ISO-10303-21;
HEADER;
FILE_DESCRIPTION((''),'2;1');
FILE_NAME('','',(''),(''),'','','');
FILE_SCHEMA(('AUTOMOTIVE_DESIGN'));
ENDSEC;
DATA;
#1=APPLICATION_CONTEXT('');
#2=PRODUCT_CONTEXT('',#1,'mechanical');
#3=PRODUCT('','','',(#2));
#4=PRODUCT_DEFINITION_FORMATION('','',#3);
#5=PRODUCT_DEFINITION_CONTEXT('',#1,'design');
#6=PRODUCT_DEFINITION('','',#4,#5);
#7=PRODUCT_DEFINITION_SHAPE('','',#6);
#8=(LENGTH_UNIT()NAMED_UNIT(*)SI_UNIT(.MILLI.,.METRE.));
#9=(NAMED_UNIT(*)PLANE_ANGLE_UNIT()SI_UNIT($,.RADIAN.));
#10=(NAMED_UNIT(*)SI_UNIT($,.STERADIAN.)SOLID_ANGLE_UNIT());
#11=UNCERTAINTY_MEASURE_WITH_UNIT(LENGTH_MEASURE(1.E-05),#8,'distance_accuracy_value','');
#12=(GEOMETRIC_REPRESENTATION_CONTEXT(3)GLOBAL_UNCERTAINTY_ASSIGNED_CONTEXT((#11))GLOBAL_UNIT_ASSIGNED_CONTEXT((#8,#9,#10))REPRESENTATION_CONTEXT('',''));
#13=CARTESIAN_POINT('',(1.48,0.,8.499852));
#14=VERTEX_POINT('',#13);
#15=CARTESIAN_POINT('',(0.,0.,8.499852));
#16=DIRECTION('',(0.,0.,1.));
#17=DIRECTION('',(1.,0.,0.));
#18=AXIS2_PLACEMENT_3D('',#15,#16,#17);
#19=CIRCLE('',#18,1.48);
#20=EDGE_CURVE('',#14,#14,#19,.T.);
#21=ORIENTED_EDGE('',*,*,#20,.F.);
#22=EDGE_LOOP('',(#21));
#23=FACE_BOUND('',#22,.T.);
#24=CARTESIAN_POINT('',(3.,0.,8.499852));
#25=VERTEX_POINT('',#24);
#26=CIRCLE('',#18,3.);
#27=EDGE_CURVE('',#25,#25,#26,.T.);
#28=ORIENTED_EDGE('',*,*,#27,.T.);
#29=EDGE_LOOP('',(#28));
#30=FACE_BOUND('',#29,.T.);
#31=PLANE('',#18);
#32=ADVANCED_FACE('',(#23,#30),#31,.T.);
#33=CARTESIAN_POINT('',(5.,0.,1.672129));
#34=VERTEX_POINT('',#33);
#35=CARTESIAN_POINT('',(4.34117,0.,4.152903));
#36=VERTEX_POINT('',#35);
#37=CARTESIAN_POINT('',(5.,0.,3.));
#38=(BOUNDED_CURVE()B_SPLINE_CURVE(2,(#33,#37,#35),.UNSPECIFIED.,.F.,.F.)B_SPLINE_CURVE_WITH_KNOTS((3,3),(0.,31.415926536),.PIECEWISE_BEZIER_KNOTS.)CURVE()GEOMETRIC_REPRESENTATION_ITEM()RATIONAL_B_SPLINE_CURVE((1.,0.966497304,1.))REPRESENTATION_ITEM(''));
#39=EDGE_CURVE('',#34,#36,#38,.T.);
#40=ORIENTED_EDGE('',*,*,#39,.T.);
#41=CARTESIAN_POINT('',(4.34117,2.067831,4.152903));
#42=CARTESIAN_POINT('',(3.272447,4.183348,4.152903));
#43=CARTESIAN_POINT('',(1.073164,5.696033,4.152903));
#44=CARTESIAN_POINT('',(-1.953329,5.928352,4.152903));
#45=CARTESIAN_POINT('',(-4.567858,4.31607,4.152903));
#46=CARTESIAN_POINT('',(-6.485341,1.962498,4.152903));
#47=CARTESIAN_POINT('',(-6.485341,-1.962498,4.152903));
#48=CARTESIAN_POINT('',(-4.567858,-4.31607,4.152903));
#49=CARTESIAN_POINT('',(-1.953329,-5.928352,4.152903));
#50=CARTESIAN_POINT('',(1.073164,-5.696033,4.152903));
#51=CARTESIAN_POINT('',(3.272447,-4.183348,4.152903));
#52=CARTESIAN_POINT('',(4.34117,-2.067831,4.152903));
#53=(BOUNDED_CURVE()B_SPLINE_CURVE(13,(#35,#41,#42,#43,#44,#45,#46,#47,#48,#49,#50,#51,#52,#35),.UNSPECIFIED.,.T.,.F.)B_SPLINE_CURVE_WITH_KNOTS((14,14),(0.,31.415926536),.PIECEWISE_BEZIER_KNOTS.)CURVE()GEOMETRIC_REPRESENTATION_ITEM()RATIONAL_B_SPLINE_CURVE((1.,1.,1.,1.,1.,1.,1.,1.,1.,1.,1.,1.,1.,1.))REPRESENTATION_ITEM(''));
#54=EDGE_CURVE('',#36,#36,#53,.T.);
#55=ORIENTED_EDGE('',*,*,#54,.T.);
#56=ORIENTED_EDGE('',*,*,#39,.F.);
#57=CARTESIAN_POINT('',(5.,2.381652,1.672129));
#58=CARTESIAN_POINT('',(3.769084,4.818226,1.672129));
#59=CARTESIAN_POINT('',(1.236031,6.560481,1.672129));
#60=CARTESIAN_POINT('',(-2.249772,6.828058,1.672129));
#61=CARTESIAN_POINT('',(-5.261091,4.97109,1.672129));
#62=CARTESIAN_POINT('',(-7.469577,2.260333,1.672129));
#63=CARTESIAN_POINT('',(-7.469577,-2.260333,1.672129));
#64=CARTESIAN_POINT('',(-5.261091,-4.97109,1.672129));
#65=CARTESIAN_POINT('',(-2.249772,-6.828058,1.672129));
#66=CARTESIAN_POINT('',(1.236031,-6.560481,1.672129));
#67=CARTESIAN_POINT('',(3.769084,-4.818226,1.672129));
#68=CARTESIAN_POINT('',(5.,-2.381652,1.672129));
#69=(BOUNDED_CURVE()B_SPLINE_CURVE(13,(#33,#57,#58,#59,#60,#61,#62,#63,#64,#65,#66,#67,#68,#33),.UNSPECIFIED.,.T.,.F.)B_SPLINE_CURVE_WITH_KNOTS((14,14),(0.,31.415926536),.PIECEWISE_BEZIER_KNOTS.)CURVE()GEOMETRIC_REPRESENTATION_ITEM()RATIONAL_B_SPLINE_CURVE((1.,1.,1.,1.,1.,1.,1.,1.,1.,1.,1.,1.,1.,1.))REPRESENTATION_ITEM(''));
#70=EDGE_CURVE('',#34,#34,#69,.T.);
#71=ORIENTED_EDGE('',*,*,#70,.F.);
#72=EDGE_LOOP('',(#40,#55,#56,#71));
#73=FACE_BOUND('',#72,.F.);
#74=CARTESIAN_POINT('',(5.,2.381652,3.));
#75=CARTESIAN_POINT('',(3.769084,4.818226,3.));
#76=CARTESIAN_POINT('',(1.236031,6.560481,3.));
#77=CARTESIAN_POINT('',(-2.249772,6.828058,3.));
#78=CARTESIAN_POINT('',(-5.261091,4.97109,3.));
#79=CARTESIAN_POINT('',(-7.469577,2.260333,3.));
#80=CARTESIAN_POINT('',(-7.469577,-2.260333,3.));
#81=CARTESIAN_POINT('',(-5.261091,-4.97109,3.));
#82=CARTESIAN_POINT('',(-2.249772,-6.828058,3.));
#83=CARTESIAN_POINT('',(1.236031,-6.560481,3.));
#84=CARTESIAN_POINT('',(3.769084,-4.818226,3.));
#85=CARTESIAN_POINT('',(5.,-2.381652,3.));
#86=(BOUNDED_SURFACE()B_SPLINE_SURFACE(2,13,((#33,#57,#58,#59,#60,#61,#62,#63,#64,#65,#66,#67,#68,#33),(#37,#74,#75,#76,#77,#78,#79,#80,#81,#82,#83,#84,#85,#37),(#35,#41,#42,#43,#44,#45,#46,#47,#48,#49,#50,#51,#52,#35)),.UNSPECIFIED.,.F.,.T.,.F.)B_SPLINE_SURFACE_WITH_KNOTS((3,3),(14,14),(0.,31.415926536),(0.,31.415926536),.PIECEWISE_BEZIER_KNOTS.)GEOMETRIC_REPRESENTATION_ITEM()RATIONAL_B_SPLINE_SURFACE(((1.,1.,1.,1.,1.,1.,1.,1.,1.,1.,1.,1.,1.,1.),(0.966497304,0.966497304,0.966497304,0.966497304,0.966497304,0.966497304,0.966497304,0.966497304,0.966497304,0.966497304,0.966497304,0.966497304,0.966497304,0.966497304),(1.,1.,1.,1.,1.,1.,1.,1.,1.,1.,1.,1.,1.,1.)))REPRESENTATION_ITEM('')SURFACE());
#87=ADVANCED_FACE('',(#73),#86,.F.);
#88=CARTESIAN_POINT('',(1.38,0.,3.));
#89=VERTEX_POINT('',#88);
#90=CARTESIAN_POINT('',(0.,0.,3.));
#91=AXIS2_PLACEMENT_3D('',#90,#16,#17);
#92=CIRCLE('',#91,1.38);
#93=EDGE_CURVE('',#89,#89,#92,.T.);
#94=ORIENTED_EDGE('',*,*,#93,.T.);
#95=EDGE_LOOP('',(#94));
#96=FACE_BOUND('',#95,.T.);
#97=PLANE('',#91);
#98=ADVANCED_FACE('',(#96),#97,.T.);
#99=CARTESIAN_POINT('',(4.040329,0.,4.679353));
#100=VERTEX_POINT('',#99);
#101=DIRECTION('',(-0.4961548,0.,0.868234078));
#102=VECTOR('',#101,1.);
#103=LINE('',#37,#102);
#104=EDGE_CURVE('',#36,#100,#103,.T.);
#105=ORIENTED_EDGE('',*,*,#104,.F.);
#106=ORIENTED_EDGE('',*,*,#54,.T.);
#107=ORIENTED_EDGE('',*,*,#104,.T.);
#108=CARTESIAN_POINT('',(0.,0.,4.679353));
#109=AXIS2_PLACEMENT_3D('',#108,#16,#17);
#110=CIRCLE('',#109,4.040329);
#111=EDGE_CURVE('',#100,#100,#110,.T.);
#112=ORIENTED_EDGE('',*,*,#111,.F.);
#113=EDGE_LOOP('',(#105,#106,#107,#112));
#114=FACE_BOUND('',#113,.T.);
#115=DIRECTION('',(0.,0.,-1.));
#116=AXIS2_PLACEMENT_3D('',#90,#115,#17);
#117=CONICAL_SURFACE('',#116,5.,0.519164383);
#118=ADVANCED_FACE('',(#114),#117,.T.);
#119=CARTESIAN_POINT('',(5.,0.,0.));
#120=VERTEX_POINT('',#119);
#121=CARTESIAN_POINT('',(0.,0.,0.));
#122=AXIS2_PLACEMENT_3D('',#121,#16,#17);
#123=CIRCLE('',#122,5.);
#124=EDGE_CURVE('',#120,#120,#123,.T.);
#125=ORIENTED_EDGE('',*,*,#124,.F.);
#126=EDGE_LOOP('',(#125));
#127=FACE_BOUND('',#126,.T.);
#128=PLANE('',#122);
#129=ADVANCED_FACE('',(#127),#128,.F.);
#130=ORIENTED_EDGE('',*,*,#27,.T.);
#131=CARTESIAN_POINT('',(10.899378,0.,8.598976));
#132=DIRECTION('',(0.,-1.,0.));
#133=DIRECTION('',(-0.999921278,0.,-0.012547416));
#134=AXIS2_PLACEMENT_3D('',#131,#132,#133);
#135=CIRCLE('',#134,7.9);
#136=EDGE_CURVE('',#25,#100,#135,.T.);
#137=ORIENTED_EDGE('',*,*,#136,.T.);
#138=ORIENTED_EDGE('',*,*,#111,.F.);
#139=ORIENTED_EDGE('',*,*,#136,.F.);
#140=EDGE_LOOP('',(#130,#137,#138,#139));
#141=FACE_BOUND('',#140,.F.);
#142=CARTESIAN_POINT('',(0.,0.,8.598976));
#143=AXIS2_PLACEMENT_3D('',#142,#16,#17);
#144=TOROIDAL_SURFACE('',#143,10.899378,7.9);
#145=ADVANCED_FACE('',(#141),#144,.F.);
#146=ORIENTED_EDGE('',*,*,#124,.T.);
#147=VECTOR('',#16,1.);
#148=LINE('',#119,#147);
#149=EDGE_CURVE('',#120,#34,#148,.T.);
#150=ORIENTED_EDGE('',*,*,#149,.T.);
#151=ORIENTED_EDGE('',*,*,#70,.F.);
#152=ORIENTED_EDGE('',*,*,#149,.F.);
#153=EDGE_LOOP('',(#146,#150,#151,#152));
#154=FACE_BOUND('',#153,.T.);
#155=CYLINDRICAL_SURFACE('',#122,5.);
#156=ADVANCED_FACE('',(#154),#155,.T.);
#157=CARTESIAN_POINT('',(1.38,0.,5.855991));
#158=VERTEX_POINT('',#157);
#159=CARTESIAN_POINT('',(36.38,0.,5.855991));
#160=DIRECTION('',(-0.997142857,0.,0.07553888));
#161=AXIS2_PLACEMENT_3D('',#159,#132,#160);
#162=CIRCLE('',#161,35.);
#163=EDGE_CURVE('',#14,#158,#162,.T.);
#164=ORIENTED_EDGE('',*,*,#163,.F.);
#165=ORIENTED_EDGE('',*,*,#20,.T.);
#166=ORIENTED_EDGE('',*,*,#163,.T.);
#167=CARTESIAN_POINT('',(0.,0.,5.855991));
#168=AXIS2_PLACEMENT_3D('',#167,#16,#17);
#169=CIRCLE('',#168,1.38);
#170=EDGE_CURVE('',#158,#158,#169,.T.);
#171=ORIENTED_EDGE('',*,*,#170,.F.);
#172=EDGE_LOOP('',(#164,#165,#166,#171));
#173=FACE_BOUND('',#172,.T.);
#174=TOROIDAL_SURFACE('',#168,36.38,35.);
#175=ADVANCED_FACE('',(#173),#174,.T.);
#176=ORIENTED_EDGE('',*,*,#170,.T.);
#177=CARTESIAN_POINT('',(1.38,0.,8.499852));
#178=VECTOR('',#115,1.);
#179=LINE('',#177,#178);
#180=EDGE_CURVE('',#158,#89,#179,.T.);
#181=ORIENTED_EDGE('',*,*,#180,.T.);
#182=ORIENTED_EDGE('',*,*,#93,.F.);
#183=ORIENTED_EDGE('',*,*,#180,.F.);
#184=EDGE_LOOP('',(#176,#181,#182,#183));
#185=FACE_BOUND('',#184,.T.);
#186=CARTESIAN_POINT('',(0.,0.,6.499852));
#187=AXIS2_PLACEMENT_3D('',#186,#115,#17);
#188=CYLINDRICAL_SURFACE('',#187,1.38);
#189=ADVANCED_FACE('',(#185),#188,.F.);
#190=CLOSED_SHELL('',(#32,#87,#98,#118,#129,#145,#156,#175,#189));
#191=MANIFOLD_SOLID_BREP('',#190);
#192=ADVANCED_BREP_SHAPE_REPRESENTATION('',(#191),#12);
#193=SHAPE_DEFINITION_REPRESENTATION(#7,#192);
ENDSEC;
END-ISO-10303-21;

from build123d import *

# Parameters (mm, degrees)
F2_R     = 5
F3_DEPTH = 2
F4_SIZE  = 0.1


# Not quite as in the source:
# - a fillet or chamfer that OpenCascade refuses, or shapes differently, is made with other operations: its cross-section is extruded or revolved along the edge and cut away or added


with BuildPart() as f1:
    # F0 (on Front) → F1 (revolve)
    with BuildSketch(Plane.XZ):
        Polygon((0, 3), (0, 0), (5, 0), (5, 3), (3, 6.4998515683), (1.38, 6.4998515683), (1.38, 3), align=None)
    revolve(axis=Axis((0, 0, 4.7499257841), (0, 0, 1)))

    # F2
    f2_edges = [f1.edges().sort_by_distance(p)[0] for p in [
        (-5, 0, 3),
    ]]
    fillet(f2_edges, radius=F2_R)

    # F3 (add): a face of the model
    f3_faces = [f1.faces().sort_by_distance(p)[0] for p in [
        (-2.9151471863, 0, 6.4998515683),
    ]]
    extrude(f3_faces, amount=F3_DEPTH)

    # F4
    f4_edges = [f1.edges().sort_by_distance(p)[0] for p in [
        (-1.38, 0, 8.499852),
    ]]
    chamfer(f4_edges, length=F4_SIZE)

    # F5: fillet of radius 35 on 1 edges, made by hand

    # F5_s1 → F5_t2 (revolve, cut)
    with BuildSketch(Plane.XZ):
        with BuildLine():
            ThreePointArc((1.48, 8.4998515683), (1.405008935, 7.1788664105), (1.38, 5.8559907549))
            Line((1.38, 5.8559907549), (1.38, 8.3998515683))
            Line((1.38, 8.3998515683), (1.48, 8.4998515683))
        make_face()
    revolve(axis=Axis((0, 0, 8.3998515683), (0, 0, 1)), mode=Mode.SUBTRACT)

    # F6: fillet of radius 7.9 on 1 edges, made by hand

    # F6_s1 → F6_t2 (revolve)
    with BuildSketch(Plane.XZ):
        with BuildLine():
            ThreePointArc((3, 8.4998515683), (3.276921402, 6.5233668652), (4.0403288808, 4.6793532357))
            Line((4.0403288808, 4.6793532357), (3, 6.4998515683))
            Line((3, 6.4998515683), (3, 8.4998515683))
        make_face()
    revolve(axis=Axis((0, 0, 6.4998515683), (0, 0, 1)))


solid = f1.part
